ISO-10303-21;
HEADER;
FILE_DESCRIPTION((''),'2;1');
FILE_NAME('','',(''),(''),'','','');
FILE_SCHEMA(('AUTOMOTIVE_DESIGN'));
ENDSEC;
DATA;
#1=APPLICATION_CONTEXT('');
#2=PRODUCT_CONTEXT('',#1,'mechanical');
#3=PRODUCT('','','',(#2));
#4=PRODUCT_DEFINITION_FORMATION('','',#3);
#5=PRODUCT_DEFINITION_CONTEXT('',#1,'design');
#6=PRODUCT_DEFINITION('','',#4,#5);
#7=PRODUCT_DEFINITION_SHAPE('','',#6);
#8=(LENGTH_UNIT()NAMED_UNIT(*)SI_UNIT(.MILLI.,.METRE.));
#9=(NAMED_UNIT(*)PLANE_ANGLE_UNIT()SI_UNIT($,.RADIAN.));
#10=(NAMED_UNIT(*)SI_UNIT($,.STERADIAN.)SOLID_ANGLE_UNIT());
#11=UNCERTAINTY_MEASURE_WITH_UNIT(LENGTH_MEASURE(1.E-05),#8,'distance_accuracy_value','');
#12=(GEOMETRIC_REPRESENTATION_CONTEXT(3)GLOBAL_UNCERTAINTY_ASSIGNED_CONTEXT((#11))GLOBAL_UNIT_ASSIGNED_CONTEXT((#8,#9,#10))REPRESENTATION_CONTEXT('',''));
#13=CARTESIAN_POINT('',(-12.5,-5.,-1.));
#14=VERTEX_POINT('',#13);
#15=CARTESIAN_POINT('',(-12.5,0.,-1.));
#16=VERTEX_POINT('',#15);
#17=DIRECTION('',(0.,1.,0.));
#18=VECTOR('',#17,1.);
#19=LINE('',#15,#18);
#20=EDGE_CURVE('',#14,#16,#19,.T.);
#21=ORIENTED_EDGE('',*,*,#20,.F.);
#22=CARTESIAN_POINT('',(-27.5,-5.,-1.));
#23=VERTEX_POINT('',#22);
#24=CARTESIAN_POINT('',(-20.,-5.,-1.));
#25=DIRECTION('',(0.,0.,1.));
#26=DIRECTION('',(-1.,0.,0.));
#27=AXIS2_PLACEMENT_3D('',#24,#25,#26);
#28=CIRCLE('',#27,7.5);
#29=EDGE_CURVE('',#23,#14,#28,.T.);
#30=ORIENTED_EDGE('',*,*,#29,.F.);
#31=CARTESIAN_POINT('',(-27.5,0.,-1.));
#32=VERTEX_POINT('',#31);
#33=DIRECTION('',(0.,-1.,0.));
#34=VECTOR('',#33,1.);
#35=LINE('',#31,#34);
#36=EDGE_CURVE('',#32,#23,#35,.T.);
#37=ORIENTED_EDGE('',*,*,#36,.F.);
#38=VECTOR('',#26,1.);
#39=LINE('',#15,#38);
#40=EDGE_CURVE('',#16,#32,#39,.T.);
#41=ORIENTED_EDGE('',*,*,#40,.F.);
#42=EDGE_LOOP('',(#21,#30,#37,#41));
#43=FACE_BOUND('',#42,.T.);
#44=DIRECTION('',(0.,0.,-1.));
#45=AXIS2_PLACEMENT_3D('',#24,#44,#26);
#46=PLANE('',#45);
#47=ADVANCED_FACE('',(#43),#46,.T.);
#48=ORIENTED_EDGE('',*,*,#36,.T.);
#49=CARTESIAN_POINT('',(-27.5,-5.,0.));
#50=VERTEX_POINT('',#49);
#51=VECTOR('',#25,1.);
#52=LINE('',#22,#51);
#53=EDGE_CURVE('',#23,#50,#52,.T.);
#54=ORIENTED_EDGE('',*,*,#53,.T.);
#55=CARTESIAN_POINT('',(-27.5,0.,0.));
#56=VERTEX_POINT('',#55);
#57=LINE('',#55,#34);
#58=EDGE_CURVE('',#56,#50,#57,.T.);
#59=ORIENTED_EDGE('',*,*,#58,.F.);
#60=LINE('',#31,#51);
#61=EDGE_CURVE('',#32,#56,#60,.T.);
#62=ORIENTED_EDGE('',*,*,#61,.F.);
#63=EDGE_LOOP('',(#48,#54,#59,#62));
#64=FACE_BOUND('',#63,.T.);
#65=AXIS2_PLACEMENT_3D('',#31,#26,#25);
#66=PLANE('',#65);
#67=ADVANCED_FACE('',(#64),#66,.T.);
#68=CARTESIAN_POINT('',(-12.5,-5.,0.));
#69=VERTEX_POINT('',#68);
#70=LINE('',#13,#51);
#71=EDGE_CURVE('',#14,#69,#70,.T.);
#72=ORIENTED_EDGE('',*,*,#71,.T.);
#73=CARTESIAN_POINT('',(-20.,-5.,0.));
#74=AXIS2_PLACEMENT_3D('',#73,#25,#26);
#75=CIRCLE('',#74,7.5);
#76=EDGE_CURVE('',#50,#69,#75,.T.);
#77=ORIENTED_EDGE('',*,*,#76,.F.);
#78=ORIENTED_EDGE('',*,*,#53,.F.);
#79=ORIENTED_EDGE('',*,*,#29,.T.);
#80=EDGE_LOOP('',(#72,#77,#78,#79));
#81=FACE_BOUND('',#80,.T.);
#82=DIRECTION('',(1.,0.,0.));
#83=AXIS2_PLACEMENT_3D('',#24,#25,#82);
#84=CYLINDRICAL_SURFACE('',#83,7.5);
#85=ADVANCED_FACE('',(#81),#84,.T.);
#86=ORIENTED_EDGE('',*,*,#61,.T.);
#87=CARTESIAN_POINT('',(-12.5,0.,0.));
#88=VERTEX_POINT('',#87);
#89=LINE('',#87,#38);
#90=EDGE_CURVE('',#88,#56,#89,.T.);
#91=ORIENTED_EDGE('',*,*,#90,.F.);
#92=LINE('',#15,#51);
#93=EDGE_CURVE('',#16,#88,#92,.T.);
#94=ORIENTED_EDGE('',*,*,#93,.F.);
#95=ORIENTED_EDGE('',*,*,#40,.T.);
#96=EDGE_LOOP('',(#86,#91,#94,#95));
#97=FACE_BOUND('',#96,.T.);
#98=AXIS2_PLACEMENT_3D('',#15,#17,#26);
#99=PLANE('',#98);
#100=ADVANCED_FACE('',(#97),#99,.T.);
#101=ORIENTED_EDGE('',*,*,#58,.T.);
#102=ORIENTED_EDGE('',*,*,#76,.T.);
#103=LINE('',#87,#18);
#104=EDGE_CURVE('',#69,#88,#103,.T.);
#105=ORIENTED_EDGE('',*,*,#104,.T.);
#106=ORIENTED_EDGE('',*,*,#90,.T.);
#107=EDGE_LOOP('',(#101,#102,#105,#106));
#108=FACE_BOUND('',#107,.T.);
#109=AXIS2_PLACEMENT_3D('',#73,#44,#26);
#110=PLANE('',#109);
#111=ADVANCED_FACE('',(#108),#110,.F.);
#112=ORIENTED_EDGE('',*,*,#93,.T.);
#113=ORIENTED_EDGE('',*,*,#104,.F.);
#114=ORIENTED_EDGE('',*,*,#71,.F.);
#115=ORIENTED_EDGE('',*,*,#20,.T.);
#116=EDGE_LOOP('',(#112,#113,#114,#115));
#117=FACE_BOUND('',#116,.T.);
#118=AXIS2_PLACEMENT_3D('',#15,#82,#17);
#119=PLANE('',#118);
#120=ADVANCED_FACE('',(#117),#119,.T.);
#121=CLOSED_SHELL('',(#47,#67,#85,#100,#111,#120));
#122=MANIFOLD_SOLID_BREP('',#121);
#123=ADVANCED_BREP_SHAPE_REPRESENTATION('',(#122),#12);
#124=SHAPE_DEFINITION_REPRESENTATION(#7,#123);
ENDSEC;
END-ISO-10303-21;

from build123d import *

# Parameters (mm, degrees)
BASE_FLANGE1_DEPTH = 1


# Sheet-metal steps are written as plain solids
with BuildPart() as part:
    # Sketch2 → Base-Flange1 (new body)
    with BuildSketch(Plane.XY):
        with BuildLine():
            Line((-12.5, 0), (-27.5, 0))
            Line((-27.5, 0), (-27.5, -5))
            ThreePointArc((-27.5, -5), (-20, -12.5), (-12.5, -5))
            Line((-12.5, -5), (-12.5, 0))
        make_face()
    extrude(amount=-BASE_FLANGE1_DEPTH)


solid = part.part
